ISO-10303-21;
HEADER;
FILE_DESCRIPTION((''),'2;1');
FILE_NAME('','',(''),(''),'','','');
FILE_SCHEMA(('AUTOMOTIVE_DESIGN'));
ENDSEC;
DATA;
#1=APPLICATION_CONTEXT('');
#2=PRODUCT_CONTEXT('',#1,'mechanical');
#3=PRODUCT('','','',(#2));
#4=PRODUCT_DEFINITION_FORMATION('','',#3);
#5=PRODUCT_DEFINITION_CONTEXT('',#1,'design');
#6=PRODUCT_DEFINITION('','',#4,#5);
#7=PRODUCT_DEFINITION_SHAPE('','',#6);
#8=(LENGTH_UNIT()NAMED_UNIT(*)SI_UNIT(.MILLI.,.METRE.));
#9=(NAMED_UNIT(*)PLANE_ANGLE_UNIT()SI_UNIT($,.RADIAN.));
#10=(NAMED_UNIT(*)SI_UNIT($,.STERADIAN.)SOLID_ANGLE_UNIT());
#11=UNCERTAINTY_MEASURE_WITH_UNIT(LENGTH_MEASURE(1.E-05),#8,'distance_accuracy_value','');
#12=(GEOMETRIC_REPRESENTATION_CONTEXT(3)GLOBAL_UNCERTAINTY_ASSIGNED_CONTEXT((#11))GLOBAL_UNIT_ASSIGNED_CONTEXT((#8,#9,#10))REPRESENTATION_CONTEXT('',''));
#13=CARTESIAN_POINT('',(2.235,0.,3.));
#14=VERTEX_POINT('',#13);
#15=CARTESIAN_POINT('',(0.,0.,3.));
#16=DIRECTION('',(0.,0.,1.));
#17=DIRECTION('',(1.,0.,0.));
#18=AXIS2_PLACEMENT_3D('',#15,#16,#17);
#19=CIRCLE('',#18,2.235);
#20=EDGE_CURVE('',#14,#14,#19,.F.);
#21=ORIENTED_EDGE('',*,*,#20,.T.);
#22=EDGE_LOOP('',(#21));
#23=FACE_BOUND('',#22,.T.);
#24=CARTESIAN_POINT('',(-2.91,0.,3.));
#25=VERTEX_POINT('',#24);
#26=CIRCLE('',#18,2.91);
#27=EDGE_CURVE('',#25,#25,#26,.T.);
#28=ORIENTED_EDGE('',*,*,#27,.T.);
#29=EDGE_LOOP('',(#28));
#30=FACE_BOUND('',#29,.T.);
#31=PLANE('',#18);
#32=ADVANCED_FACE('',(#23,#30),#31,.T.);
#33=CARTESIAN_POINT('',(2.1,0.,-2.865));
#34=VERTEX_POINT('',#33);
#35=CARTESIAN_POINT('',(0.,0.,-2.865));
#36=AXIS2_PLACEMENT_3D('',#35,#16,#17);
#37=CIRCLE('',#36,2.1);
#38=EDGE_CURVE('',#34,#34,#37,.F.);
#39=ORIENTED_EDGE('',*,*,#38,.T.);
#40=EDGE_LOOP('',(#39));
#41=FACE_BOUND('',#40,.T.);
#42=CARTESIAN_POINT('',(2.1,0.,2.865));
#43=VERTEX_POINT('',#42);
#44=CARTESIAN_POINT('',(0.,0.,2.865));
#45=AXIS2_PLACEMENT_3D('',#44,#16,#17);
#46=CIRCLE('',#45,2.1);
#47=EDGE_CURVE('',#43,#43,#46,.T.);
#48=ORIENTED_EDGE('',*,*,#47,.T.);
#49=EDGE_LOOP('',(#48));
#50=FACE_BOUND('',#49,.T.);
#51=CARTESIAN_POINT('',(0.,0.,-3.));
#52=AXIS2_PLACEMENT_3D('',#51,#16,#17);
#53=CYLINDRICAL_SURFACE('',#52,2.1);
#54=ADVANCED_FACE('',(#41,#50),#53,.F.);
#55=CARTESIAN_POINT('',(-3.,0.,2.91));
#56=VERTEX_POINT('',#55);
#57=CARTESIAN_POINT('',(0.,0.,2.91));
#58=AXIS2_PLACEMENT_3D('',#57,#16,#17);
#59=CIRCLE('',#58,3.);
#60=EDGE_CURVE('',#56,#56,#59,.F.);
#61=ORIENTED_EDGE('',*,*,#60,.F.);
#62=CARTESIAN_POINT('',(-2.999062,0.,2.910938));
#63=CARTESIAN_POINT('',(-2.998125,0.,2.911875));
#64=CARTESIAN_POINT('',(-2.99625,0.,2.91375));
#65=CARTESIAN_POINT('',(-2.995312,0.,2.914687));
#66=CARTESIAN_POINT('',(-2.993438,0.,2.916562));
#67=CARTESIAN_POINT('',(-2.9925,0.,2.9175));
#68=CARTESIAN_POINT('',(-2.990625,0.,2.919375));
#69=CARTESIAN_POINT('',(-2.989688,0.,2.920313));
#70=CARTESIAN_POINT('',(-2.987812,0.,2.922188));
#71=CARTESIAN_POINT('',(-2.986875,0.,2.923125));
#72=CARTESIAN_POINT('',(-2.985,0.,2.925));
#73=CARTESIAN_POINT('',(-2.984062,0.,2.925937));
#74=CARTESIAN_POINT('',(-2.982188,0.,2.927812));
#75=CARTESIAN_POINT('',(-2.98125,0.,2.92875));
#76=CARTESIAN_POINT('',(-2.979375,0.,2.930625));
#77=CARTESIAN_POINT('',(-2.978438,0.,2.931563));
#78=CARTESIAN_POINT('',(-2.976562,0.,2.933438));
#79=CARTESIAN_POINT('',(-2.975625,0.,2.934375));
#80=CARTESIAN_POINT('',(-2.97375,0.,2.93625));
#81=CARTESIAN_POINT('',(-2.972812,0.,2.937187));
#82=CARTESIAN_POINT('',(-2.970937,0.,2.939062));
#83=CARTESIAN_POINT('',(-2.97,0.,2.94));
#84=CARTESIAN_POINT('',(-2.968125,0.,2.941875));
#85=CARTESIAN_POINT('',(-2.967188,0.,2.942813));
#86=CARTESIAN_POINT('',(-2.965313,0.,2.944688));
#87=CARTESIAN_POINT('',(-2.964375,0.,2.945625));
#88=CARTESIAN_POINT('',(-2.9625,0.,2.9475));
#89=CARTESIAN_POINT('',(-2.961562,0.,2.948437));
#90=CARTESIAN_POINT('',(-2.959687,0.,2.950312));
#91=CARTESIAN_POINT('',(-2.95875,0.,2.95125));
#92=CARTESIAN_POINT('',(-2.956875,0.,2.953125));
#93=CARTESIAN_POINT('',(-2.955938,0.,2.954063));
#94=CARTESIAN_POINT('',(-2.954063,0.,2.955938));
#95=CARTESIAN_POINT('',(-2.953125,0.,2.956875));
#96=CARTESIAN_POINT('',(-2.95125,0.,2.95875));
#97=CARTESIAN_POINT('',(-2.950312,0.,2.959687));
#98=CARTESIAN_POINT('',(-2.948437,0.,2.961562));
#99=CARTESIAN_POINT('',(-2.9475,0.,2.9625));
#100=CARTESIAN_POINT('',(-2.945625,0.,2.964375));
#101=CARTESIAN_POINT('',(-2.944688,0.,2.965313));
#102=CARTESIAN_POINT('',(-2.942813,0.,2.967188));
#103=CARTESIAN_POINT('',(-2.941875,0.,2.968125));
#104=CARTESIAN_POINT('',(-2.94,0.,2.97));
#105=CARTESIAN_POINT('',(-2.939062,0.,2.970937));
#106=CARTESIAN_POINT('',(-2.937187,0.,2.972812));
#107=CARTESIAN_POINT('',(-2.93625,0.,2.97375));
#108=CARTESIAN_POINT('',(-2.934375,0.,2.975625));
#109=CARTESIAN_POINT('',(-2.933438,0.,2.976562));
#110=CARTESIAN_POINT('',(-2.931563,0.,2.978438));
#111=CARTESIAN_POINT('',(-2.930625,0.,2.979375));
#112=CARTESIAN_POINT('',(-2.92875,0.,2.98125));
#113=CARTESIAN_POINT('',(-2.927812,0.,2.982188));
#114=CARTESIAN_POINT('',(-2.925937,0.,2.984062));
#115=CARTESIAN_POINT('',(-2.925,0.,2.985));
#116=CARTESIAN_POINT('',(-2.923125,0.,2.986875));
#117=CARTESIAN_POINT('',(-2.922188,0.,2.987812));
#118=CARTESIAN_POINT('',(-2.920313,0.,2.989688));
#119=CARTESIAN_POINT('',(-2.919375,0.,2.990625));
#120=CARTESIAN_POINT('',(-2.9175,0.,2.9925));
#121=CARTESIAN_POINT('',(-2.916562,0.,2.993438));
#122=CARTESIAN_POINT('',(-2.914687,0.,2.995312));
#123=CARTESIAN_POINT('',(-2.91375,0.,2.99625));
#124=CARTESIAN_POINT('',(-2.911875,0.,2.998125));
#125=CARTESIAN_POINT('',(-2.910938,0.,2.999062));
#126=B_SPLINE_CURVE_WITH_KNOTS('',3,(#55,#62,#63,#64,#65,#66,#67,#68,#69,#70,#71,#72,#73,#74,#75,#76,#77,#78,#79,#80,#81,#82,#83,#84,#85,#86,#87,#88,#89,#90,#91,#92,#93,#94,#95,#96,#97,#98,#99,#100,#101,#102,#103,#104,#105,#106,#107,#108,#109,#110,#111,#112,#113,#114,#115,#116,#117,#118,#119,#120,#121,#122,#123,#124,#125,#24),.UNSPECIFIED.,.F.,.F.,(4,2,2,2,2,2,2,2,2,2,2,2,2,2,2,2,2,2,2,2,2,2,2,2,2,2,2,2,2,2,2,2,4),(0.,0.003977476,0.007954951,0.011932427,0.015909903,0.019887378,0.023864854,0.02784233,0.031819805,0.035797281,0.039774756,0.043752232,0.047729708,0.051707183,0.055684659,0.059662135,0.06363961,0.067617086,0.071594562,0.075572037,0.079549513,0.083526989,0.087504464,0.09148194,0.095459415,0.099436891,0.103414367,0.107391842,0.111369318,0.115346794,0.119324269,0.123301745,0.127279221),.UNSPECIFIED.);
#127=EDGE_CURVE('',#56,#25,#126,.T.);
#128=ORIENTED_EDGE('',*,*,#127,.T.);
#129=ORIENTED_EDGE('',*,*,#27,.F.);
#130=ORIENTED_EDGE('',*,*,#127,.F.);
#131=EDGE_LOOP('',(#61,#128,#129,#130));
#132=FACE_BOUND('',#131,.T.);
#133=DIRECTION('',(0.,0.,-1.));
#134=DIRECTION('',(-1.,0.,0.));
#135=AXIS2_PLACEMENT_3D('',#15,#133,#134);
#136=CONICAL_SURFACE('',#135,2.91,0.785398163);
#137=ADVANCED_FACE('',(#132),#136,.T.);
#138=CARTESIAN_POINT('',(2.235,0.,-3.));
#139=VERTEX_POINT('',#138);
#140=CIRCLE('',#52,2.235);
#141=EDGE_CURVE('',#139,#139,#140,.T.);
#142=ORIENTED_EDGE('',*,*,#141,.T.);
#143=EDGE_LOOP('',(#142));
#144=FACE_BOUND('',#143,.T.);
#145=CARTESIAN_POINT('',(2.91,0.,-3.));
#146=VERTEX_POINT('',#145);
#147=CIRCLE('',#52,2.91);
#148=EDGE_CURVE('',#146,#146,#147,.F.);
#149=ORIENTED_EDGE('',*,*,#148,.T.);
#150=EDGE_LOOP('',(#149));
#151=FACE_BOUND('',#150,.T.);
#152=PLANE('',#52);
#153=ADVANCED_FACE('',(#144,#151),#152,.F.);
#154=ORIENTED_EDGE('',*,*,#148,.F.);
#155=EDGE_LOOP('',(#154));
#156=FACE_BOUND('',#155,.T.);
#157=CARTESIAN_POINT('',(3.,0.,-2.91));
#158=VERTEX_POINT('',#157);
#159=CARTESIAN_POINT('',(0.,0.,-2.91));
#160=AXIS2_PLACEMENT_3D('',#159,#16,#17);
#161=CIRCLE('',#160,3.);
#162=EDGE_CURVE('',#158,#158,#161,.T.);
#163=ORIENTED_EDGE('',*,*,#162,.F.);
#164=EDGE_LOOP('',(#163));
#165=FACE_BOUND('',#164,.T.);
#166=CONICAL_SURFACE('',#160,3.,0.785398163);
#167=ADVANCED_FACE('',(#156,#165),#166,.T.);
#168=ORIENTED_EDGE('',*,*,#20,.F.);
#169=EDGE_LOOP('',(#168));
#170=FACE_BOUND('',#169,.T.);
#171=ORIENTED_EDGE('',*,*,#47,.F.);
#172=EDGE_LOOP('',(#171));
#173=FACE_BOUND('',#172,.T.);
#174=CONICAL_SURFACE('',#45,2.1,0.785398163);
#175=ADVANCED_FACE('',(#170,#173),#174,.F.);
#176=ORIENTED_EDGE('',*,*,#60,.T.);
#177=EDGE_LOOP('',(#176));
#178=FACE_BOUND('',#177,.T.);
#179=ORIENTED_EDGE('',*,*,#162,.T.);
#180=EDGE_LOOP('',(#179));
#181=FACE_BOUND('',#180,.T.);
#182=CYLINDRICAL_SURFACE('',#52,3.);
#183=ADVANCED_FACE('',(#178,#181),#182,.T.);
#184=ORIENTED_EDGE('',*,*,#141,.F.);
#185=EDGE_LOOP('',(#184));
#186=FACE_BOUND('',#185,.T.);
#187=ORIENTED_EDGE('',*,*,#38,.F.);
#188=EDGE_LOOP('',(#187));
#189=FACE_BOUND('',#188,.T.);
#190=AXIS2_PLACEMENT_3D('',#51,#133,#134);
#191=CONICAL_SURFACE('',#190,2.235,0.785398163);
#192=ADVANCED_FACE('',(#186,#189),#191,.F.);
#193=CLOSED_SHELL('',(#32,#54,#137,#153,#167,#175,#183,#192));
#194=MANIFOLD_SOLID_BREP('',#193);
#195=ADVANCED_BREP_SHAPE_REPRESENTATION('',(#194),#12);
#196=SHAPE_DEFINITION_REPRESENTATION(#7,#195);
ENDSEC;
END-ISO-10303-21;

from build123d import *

# Parameters (mm, degrees)
BOSS_EXTRUDE1_DEPTH      = 3
BOSS_EXTRUDE1_DEPTH_BACK = 3
SKETCH3_R                = 3
SKETCH3_R_2              = 2.1
CHAMFER1_SIZE            = 0.09
CHAMFER2_SIZE            = 0.135


with BuildPart() as part:
    # Sketch3 → Boss-Extrude1 (new, two sides: drawn at the far end of the back side and taken through both)
    with BuildSketch(Plane.XY.offset(-BOSS_EXTRUDE1_DEPTH_BACK)):
        Circle(SKETCH3_R)
        Circle(SKETCH3_R_2, mode=Mode.SUBTRACT)
    extrude(amount=BOSS_EXTRUDE1_DEPTH + BOSS_EXTRUDE1_DEPTH_BACK)

    # Chamfer1
    chamfer1_edges = [part.edges().sort_by_distance(p)[0] for p in [
        (-3, 0, -3),
        (-3, 0, 3),
    ]]
    chamfer(chamfer1_edges, length=CHAMFER1_SIZE)

    # Chamfer2
    chamfer2_edges = [part.edges().sort_by_distance(p)[0] for p in [
        (-2.1, 0, -3),
        (-2.1, 0, 3),
    ]]
    chamfer(chamfer2_edges, length=CHAMFER2_SIZE)


solid = part.part
